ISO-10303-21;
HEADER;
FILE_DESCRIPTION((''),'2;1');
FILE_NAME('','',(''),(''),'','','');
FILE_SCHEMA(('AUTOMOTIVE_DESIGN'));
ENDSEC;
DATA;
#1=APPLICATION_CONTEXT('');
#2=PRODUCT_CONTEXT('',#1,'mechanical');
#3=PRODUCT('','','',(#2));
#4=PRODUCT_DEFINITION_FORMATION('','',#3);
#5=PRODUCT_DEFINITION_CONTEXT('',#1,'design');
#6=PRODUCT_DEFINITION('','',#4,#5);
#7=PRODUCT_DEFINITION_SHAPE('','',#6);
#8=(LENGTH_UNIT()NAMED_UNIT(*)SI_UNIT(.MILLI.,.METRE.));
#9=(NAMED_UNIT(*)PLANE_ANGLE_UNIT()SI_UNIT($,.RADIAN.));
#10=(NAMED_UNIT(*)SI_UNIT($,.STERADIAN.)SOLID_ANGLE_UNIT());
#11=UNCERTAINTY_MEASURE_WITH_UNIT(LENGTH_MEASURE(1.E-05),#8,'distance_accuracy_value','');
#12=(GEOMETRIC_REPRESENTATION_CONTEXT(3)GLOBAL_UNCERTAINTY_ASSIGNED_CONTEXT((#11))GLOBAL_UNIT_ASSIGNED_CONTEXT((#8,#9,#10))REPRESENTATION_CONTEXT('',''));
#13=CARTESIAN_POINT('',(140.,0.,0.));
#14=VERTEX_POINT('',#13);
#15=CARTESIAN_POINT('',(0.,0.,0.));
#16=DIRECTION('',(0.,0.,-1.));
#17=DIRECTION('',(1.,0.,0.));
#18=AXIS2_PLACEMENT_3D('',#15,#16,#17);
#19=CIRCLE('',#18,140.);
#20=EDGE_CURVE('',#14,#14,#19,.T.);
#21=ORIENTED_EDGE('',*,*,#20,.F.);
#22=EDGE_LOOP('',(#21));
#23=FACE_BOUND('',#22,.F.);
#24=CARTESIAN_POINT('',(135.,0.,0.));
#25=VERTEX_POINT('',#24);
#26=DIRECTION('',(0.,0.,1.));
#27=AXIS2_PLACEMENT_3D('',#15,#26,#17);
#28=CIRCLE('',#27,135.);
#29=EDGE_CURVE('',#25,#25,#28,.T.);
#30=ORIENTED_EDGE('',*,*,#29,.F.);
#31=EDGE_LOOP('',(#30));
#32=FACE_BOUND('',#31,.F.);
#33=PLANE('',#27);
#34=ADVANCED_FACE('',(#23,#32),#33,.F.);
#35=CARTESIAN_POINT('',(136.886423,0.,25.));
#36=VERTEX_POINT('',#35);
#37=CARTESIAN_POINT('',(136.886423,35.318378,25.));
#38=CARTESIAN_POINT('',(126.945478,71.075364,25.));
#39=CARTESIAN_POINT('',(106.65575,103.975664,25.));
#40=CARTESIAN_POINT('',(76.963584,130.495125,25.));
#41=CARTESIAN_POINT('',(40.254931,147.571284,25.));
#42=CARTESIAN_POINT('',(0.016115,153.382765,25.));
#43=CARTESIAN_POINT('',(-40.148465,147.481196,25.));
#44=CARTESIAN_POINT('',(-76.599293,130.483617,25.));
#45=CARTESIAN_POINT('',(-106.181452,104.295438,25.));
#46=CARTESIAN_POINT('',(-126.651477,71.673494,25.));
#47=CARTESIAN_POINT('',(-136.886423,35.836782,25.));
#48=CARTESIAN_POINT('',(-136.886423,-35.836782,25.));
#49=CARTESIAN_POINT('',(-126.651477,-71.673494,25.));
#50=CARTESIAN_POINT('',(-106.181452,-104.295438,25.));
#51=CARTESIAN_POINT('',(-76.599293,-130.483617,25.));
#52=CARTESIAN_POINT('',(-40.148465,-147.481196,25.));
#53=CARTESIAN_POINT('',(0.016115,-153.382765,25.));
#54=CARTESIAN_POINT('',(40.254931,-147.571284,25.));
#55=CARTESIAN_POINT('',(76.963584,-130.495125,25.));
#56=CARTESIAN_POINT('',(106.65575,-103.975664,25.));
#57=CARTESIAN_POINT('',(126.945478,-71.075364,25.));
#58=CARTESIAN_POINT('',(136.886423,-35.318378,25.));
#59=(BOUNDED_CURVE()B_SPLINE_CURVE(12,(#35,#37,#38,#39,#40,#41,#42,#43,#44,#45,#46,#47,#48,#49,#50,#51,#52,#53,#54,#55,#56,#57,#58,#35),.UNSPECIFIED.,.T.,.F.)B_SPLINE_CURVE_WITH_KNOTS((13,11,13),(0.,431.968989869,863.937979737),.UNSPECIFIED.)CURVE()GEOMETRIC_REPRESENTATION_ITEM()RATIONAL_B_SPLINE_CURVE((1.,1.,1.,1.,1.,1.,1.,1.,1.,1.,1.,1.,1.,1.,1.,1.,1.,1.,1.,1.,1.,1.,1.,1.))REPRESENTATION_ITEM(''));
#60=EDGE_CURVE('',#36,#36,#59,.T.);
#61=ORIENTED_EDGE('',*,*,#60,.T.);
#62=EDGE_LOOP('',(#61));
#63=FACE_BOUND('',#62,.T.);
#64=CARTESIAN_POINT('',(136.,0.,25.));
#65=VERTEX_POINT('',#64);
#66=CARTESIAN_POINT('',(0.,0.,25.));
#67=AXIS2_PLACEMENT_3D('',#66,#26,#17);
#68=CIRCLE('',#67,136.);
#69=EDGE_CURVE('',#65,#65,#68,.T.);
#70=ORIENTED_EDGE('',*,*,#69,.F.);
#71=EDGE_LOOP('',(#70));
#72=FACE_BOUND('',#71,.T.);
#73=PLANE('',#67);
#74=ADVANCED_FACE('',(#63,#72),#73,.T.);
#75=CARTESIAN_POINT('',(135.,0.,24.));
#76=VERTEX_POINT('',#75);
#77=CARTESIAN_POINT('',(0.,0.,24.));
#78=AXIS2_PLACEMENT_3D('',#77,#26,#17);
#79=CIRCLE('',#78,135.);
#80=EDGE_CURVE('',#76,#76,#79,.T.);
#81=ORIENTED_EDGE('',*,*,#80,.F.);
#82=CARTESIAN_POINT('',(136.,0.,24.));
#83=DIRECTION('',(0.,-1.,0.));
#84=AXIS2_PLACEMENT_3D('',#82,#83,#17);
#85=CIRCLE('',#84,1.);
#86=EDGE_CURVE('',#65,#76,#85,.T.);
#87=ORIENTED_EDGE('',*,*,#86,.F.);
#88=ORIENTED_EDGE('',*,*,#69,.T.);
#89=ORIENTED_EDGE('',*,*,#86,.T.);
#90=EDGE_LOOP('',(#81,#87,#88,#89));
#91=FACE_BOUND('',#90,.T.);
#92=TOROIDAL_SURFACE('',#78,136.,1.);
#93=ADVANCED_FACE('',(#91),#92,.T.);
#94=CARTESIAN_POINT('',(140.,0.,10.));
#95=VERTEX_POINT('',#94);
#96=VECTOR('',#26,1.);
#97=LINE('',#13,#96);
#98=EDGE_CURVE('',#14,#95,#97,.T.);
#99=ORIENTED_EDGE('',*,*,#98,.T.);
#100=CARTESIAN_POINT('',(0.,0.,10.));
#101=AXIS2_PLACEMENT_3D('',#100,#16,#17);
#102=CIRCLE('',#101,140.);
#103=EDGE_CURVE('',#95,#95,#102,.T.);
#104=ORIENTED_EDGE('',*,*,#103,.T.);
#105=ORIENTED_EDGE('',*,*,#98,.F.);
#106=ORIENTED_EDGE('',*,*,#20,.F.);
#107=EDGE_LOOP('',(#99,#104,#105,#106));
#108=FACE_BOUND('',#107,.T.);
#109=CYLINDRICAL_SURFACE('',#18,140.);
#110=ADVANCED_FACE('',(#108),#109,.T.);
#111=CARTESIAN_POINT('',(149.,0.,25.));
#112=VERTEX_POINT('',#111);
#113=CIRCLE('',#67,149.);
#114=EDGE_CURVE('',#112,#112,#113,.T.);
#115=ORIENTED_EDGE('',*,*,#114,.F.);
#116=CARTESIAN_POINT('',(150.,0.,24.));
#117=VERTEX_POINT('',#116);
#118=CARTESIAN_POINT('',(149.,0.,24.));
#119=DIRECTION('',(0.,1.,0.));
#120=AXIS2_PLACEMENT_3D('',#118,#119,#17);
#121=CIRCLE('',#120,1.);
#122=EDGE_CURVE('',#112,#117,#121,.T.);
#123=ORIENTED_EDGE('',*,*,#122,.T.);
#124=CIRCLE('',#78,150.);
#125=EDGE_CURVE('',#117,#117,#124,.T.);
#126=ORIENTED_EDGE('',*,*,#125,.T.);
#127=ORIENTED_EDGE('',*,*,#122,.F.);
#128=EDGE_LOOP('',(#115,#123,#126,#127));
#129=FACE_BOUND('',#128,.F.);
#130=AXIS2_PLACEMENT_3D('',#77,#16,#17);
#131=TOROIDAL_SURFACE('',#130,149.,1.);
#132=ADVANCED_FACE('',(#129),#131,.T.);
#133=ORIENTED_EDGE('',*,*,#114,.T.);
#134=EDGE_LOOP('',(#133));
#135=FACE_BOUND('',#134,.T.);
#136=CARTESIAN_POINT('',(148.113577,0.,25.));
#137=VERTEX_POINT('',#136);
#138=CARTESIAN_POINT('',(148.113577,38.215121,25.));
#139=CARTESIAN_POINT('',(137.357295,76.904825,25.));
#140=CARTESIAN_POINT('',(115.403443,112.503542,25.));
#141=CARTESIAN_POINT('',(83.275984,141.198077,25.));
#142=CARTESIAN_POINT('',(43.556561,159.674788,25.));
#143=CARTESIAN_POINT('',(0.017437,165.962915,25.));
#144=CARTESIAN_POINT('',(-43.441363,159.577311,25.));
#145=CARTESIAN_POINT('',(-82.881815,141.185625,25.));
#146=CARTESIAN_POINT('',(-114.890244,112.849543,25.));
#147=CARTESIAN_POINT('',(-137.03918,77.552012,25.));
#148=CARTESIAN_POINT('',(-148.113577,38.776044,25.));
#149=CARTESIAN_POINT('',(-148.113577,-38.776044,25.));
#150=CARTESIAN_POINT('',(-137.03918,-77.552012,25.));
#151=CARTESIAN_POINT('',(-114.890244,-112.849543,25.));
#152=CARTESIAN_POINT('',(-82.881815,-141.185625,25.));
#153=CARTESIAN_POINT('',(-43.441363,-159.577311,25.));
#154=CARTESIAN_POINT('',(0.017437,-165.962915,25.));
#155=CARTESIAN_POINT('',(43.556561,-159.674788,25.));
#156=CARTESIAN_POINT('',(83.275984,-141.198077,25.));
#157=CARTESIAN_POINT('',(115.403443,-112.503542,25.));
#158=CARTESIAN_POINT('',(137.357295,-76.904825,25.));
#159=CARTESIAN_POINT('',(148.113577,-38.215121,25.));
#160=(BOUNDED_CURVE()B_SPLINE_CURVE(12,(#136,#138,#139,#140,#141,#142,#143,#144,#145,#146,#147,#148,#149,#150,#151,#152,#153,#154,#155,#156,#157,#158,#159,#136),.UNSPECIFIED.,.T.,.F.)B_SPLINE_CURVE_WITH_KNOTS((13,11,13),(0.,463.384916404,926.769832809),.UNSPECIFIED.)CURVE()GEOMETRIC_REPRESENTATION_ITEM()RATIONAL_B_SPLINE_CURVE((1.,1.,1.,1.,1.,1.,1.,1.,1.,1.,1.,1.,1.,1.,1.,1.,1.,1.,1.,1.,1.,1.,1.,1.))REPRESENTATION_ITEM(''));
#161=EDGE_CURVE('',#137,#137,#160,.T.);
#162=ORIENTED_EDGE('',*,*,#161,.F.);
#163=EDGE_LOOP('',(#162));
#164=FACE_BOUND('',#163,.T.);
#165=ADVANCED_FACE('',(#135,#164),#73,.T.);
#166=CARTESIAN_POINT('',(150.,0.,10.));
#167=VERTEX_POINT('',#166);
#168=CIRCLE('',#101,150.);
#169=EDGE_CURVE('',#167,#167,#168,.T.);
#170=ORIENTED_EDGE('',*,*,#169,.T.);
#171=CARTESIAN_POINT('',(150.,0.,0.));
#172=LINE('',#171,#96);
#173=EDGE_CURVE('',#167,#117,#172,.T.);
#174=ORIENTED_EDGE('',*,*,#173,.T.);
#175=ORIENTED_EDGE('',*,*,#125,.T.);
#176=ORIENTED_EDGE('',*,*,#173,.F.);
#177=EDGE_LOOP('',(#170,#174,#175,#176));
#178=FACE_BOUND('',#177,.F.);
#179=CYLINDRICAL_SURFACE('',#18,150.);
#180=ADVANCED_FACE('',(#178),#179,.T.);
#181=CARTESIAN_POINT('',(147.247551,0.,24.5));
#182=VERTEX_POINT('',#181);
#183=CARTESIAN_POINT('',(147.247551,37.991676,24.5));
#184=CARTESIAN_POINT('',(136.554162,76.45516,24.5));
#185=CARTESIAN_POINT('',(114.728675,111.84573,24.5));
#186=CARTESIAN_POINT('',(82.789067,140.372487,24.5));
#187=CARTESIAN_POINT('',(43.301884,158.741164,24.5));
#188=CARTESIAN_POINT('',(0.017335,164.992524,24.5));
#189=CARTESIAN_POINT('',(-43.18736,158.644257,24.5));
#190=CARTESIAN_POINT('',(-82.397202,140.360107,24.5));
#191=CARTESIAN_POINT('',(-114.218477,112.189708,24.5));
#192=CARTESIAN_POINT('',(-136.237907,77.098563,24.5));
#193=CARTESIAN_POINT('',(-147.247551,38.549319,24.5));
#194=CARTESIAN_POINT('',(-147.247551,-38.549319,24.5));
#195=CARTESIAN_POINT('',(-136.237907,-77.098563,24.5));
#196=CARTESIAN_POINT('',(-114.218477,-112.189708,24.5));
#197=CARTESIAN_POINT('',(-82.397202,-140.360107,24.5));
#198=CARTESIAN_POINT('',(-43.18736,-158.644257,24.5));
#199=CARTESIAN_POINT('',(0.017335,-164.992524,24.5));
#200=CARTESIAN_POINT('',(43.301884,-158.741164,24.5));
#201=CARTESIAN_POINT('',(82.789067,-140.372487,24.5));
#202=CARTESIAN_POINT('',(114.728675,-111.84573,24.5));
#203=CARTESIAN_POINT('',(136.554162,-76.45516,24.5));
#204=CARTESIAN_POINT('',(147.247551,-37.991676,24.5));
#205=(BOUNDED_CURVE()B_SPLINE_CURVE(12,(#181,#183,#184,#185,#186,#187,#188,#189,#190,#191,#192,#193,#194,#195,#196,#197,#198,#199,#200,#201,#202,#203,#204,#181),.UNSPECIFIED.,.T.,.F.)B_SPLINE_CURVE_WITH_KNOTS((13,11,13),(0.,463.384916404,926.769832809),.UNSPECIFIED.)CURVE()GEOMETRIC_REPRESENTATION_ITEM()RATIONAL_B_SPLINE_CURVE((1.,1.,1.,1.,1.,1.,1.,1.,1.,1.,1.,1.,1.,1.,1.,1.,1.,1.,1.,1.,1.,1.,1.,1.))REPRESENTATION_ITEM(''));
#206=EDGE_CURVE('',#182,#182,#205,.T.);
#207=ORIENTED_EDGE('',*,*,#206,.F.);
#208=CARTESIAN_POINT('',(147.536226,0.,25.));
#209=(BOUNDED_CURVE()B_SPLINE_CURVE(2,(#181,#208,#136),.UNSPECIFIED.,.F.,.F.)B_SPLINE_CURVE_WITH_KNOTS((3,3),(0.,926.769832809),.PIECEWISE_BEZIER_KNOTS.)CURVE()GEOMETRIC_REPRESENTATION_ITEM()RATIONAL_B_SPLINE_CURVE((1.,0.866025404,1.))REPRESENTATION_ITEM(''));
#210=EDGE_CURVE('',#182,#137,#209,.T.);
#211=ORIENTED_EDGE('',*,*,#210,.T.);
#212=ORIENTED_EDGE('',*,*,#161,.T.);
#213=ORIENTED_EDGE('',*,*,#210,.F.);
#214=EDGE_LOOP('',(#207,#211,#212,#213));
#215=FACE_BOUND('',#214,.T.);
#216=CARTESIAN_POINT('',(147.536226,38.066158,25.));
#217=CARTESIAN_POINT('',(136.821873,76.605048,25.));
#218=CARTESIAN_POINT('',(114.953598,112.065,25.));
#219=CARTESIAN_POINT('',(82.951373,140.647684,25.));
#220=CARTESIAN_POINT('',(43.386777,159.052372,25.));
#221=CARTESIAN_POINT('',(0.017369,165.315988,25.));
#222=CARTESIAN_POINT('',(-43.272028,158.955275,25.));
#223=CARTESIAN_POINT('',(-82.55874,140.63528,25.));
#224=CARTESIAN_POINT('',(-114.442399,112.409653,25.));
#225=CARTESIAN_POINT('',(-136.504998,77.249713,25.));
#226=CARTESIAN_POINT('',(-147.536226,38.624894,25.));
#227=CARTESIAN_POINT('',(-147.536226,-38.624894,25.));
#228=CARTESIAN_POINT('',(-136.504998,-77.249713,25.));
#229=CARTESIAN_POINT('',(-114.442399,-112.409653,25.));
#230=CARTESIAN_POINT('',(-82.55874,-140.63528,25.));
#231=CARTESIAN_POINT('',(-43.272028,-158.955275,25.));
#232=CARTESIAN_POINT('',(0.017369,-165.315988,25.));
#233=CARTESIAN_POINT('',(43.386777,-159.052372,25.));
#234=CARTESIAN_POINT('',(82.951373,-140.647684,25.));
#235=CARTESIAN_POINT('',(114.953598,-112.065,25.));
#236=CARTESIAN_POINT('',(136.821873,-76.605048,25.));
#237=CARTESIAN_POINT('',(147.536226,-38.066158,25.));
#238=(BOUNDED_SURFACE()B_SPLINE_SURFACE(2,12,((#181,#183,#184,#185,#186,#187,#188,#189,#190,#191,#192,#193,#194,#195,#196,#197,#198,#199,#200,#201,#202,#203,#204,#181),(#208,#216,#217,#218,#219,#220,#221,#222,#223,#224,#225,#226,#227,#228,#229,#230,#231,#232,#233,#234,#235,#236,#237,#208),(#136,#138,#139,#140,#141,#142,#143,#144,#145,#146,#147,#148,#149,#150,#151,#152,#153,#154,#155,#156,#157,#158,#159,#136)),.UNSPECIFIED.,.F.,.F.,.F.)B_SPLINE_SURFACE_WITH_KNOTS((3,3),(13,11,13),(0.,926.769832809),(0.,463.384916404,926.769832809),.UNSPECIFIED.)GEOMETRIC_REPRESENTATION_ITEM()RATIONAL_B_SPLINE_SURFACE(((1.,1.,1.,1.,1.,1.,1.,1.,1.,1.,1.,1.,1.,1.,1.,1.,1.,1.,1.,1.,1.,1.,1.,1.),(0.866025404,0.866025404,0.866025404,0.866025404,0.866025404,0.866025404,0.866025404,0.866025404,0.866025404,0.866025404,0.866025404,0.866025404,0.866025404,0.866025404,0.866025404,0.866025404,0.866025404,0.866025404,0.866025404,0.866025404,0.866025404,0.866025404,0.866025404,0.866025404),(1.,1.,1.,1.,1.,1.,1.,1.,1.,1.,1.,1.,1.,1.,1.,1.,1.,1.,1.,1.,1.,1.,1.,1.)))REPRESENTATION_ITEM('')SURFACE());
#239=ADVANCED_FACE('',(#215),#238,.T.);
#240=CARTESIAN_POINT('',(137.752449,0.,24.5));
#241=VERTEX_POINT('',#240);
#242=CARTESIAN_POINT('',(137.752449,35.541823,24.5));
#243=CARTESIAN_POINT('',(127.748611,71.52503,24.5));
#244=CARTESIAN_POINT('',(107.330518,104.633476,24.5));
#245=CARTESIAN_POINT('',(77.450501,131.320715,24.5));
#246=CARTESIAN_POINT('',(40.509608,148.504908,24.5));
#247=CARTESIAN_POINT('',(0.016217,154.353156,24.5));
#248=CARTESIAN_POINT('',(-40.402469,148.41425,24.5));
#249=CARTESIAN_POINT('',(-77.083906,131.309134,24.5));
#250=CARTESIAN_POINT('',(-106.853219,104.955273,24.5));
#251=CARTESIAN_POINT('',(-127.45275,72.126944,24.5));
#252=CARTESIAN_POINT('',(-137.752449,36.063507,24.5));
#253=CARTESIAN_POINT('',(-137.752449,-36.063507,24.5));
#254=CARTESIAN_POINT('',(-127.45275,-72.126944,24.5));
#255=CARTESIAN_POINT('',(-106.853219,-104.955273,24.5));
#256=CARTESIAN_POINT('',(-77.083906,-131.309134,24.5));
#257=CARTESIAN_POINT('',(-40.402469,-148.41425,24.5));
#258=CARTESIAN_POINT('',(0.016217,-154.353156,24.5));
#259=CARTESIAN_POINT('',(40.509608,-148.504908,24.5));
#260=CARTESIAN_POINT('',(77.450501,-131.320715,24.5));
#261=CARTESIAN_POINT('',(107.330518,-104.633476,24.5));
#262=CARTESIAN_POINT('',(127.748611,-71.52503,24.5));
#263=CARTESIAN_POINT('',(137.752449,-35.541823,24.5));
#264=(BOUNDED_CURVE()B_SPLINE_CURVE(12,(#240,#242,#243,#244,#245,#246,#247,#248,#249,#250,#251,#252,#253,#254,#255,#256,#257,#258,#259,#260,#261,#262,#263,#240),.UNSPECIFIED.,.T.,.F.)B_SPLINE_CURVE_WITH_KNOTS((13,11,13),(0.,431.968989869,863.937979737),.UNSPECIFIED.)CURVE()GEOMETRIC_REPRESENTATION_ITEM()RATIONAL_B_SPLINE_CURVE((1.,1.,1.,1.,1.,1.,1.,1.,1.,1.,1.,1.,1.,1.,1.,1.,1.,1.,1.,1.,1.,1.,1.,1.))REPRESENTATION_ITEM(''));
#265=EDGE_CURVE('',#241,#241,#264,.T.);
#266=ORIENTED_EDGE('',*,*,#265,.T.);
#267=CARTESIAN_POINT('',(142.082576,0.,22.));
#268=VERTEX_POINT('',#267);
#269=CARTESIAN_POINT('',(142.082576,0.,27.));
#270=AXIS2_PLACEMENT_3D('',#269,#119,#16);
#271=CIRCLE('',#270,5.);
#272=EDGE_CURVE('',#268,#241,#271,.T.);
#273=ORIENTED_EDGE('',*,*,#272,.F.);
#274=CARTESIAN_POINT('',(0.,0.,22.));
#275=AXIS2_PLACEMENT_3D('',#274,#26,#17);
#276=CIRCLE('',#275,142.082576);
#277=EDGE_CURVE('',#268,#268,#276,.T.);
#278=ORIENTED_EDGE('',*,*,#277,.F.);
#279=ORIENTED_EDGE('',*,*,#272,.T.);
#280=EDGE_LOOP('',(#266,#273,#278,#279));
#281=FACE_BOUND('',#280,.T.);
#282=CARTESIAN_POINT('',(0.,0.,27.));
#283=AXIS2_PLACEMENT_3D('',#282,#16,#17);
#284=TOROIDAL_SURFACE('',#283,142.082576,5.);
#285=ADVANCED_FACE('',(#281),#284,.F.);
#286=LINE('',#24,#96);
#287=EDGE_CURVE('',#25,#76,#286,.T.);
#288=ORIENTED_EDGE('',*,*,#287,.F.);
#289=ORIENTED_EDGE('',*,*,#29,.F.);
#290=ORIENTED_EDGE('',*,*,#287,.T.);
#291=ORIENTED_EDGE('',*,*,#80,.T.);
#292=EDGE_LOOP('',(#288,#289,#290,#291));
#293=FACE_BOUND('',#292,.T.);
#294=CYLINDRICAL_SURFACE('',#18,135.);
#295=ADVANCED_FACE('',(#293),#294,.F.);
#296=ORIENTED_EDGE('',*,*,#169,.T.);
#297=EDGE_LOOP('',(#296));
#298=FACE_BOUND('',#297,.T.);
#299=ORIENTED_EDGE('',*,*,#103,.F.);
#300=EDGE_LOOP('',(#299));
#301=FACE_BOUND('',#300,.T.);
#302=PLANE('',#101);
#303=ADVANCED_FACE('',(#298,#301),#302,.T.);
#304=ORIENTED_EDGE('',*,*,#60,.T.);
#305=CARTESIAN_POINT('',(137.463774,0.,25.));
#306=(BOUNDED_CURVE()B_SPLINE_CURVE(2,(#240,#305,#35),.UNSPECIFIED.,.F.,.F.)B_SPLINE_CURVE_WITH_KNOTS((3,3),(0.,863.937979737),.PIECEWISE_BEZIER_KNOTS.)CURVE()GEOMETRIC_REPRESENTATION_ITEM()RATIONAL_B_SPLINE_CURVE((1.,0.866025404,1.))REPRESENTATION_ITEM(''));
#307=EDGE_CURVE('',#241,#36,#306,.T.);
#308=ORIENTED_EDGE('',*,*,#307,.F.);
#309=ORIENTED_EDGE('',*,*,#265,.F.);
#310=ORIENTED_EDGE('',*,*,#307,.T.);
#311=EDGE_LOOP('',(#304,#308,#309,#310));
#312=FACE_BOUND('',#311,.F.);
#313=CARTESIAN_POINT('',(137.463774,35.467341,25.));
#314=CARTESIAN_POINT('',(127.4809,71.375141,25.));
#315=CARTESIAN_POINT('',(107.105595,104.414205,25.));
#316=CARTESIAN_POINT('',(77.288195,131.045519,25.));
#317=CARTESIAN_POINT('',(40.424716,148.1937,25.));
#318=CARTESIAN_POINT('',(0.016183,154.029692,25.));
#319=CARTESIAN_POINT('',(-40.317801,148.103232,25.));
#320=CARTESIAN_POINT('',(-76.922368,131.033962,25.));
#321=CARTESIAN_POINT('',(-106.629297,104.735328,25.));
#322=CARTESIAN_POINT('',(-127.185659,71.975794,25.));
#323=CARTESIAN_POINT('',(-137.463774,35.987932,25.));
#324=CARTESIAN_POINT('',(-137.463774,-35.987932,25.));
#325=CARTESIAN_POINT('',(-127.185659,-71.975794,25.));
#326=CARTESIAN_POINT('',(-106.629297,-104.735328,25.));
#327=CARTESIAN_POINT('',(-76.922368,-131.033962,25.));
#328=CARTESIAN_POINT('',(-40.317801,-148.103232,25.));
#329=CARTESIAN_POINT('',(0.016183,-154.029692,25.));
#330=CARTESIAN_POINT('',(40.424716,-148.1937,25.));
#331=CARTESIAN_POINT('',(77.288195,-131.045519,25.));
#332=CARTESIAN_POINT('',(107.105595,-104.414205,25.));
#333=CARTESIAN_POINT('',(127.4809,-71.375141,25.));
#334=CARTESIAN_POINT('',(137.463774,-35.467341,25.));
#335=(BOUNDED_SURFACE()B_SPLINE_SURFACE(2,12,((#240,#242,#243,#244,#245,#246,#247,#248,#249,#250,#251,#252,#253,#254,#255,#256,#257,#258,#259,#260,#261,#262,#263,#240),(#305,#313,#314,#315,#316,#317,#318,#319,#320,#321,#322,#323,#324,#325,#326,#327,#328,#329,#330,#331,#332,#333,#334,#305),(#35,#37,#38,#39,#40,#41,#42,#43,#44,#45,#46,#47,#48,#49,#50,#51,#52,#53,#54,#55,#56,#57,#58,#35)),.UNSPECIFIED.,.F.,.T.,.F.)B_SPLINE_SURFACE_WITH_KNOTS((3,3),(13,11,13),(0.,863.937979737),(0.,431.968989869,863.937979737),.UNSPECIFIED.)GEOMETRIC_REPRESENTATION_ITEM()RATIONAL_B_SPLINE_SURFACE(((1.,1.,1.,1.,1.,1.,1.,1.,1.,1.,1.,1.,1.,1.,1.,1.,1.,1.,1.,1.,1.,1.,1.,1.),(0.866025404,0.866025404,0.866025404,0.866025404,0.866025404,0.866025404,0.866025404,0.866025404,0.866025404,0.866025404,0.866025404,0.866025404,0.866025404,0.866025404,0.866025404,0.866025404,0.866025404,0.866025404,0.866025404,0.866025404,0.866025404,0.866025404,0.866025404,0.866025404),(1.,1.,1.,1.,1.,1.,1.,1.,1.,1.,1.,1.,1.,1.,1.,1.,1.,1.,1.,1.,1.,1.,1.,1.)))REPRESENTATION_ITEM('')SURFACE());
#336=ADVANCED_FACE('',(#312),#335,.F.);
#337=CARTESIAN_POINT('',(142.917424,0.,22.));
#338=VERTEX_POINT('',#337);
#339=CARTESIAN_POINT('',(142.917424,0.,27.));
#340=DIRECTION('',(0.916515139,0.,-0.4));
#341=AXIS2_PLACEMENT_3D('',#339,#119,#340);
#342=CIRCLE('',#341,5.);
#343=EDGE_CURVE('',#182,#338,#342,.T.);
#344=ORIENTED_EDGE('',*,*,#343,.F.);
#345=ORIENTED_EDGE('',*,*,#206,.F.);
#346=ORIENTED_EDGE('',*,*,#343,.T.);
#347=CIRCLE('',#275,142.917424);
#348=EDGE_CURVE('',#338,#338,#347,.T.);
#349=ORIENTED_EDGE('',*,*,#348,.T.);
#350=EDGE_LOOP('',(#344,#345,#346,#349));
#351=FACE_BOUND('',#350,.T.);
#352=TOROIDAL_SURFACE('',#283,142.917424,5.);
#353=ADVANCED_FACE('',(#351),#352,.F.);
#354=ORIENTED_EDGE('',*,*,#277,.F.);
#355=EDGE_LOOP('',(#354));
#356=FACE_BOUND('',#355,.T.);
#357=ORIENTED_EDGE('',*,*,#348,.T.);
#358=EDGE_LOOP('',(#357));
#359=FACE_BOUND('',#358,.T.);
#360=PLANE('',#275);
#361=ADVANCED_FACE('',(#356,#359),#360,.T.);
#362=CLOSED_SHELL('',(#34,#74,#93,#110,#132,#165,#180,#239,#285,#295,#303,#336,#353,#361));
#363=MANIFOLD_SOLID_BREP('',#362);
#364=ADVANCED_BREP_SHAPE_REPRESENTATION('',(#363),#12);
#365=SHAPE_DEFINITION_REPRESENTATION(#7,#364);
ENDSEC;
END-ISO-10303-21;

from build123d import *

# Parameters (mm, degrees)
F0_R     = 150
F0_R_2   = 135
F1_DEPTH = 25
F2_R     = 150
F2_R_2   = 140
F3_DEPTH = 10
F4_R     = 147.5
F4_R_2   = 137.5
F5_DEPTH = 3
F7_R     = 1
F8_R     = 1


# Not quite as in the source:
# - a fillet or chamfer that OpenCascade refuses, or shapes differently, is made with other operations: its cross-section is extruded or revolved along the edge and cut away or added


with BuildPart() as f1:
    # F0 (on Top) → F1 (new body)
    with BuildSketch(Plane.XY):
        Circle(F0_R)
        Circle(F0_R_2, mode=Mode.SUBTRACT)
    extrude(amount=F1_DEPTH)

    # F2 (on face) → F3 (cut)
    with BuildSketch(Plane(origin=(0, 0, 0), x_dir=(1, 0, 0), z_dir=(0, 0, -1))):
        Circle(F2_R)
        Circle(F2_R_2, mode=Mode.SUBTRACT)
    extrude(amount=-F3_DEPTH, mode=Mode.SUBTRACT)

    # F4 (on face) → F5 (cut)
    with BuildSketch(Plane.XY.offset(25)):
        Circle(F4_R)
        Circle(F4_R_2, mode=Mode.SUBTRACT)
    extrude(amount=-F5_DEPTH, mode=Mode.SUBTRACT)

    # F6: fillet of radius 5 on 2 edges, made by hand

    # F6_s1 → F6_t2 (revolve)
    with BuildSketch(Plane.XZ):
        with BuildLine():
            ThreePointArc((142.082575695, 22), (139.3439629074, 22.8166998673), (137.5, 25))
            Line((137.5, 25), (137.5, 22))
            Line((137.5, 22), (142.082575695, 22))
        make_face()
    revolve(axis=Axis((0, 0, 22), (0, 0, 1)))

    # F6_s3 → F6_t4 (revolve)
    with BuildSketch(Plane.XZ):
        with BuildLine():
            ThreePointArc((147.5, 25), (145.6560370926, 22.8166998673), (142.917424305, 22))
            Line((142.917424305, 22), (147.5, 22))
            Line((147.5, 22), (147.5, 25))
        make_face()
    revolve(axis=Axis((0, 0, 22), (0, 0, 1)))

    # F7
    f7_edges = [f1.edges().sort_by_distance(p)[0] for p in [
        (-147.5, 0, 25),
        (-150, 0, 25),
    ]]
    fillet(f7_edges, radius=F7_R)

    # F8
    f8_edges = [f1.edges().sort_by_distance(p)[0] for p in [
        (-137.5, 0, 25),
        (-135, 0, 25),
    ]]
    fillet(f8_edges, radius=F8_R)


solid = f1.part
